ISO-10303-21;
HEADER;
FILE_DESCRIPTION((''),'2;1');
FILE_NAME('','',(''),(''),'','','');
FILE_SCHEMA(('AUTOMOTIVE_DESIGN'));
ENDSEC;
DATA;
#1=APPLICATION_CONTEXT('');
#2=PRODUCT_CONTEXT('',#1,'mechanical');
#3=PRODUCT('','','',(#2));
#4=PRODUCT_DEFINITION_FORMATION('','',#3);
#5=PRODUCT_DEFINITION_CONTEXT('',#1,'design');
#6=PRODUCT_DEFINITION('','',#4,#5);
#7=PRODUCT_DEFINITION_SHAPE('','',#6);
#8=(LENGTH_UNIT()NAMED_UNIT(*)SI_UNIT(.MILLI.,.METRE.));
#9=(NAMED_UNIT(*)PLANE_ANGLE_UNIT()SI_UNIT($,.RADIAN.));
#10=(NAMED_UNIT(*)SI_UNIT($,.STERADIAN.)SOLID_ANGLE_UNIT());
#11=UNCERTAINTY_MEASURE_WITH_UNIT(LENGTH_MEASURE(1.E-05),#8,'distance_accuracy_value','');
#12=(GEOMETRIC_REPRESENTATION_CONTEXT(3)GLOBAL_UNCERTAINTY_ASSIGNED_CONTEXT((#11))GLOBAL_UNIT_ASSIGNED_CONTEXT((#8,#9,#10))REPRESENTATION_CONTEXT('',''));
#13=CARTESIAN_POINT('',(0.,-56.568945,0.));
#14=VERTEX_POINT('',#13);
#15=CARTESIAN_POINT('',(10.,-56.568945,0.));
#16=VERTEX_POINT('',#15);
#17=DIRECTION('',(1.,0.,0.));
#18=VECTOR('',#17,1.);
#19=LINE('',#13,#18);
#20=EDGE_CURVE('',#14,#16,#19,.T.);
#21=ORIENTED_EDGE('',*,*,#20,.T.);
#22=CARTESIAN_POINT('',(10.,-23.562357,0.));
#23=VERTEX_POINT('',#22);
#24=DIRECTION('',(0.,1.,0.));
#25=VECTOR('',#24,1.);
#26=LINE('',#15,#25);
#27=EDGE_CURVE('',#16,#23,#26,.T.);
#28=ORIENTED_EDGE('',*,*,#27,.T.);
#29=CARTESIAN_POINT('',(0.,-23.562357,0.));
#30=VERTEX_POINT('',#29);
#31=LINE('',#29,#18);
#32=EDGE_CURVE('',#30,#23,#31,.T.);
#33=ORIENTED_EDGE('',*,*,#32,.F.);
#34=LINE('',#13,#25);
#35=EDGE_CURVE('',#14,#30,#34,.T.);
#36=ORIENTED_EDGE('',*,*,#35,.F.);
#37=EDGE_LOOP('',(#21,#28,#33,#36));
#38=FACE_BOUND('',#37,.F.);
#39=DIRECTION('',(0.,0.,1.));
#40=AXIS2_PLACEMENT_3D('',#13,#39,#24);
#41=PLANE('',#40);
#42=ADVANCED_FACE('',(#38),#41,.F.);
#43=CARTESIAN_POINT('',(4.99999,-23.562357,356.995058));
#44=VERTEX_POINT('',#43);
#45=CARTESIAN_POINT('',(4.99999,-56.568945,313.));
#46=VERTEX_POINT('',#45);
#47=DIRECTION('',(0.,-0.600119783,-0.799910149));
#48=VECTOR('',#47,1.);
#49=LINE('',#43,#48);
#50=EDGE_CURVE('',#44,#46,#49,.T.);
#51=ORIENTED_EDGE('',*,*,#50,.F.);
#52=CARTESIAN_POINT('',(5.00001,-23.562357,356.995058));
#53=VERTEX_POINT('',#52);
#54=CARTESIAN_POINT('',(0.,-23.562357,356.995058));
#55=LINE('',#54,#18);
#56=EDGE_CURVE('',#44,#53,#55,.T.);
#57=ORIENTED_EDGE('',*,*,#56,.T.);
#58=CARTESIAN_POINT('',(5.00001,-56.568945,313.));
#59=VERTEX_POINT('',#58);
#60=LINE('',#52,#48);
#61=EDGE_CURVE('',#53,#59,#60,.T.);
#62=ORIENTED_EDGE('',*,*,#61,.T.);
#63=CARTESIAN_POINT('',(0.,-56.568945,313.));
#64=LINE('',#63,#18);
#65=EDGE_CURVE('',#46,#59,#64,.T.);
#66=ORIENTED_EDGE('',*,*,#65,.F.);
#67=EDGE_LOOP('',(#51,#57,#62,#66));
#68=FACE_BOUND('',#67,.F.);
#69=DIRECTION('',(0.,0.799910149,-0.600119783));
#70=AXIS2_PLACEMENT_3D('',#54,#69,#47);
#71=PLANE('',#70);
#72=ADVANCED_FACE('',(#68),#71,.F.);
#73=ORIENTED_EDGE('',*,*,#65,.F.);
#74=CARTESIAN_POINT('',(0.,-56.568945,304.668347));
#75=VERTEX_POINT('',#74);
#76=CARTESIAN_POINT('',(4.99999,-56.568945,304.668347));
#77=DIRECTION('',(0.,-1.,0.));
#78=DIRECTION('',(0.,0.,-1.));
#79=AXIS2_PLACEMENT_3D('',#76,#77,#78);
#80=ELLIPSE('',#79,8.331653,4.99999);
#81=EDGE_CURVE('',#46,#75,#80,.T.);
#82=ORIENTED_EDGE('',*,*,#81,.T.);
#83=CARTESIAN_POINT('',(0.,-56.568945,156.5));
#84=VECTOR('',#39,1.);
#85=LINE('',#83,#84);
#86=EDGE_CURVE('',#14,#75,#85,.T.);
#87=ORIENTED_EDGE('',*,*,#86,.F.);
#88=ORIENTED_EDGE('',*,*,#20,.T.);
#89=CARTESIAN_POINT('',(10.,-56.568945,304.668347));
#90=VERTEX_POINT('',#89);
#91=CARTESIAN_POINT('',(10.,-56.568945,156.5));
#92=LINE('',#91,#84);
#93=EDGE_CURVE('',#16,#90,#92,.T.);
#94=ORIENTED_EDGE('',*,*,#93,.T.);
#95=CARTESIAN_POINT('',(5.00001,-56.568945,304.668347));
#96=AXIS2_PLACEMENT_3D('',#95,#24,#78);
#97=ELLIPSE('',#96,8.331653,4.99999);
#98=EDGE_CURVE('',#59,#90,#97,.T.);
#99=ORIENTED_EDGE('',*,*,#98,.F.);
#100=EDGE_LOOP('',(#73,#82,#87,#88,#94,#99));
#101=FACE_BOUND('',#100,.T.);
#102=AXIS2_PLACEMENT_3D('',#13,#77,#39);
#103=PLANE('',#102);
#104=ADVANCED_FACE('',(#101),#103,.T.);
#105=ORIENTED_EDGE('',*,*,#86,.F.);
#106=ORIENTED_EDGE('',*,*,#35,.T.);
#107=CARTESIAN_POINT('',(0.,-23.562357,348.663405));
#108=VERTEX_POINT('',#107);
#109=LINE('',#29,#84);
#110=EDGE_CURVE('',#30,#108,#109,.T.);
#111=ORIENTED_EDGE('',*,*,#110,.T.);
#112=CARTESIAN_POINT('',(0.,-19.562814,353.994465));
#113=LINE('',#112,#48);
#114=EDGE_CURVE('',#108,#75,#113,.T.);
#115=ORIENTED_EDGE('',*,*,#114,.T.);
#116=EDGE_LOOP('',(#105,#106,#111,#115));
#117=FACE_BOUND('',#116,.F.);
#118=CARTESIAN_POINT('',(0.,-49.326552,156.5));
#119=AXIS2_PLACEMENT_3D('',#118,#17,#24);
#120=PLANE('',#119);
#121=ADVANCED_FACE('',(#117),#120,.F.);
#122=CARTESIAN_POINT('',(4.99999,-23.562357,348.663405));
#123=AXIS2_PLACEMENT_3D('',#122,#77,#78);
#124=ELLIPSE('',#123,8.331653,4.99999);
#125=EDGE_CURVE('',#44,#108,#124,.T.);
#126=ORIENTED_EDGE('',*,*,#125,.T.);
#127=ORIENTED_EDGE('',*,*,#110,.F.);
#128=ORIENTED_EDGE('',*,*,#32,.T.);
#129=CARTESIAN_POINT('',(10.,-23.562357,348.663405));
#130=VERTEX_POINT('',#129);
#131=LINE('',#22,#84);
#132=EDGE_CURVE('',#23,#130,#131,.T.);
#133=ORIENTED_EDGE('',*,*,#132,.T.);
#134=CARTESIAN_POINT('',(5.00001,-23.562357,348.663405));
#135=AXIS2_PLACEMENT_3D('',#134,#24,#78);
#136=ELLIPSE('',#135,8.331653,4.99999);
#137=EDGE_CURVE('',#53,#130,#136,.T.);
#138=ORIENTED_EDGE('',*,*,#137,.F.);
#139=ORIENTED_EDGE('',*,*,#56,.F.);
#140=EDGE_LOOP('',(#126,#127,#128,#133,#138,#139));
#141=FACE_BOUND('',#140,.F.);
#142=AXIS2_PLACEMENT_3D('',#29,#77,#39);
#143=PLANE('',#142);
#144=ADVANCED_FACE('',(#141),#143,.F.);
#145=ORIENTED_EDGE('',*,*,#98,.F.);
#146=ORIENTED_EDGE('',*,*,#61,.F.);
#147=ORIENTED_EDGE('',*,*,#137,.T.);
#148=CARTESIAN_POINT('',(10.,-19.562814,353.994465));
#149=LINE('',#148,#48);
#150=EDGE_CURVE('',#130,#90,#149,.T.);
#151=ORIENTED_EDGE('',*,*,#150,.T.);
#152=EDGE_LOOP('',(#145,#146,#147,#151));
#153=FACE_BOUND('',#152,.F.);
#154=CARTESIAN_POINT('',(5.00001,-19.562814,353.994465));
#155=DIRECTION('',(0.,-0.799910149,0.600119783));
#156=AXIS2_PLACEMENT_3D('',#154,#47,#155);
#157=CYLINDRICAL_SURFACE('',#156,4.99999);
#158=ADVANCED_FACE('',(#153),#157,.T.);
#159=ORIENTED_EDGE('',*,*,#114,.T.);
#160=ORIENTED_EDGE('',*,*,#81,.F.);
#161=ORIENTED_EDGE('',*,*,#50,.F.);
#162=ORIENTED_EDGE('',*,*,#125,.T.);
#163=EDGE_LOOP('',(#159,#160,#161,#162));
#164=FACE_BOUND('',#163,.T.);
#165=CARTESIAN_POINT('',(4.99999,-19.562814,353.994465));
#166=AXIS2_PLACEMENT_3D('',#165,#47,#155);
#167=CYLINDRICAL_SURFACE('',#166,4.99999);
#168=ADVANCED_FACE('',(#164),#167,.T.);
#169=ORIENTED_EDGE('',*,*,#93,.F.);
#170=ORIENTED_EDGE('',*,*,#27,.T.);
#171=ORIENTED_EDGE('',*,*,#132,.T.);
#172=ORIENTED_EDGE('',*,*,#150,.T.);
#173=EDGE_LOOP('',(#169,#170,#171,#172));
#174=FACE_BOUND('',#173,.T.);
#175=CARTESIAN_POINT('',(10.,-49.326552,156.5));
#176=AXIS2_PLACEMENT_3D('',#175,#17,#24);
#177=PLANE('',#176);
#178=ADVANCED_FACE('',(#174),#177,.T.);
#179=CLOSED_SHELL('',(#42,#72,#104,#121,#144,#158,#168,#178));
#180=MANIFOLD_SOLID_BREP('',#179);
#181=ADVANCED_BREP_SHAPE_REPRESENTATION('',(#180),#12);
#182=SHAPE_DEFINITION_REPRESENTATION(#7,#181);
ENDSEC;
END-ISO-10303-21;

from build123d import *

# Parameters (mm, degrees)
F0_W     = 14.4847853028
F0_H     = 313
F1_DEPTH = 10
F2_R     = 4.99999


# Not quite as in the source:
# - a fillet or chamfer is up to 0.001 mm smaller than in the source, because OpenCascade refuses the exact size


with BuildPart() as f1:
    # F0 (on Right) → F1 (new body)
    with BuildSketch(Plane.YZ):
        with Locations((-49.3265521361, 156.5)):
            Rectangle(F0_W, F0_H)
        Polygon((-42.0841594847, 313), (-42.0841594847, 0), (-23.5623567487, 0), (-23.5623567487, 356.9950582001), (-56.5689447875, 313), align=None)
    extrude(amount=F1_DEPTH)

    # F2 (radius 5 in the source; OpenCascade refuses exactly that, so slightly less here)
    f2_edges = [f1.edges().sort_by_distance(p)[0] for p in [
        (10, -40.065651, 334.997529),
        (0, -40.065651, 334.997529),
    ]]
    fillet(f2_edges, radius=F2_R)


solid = f1.part
